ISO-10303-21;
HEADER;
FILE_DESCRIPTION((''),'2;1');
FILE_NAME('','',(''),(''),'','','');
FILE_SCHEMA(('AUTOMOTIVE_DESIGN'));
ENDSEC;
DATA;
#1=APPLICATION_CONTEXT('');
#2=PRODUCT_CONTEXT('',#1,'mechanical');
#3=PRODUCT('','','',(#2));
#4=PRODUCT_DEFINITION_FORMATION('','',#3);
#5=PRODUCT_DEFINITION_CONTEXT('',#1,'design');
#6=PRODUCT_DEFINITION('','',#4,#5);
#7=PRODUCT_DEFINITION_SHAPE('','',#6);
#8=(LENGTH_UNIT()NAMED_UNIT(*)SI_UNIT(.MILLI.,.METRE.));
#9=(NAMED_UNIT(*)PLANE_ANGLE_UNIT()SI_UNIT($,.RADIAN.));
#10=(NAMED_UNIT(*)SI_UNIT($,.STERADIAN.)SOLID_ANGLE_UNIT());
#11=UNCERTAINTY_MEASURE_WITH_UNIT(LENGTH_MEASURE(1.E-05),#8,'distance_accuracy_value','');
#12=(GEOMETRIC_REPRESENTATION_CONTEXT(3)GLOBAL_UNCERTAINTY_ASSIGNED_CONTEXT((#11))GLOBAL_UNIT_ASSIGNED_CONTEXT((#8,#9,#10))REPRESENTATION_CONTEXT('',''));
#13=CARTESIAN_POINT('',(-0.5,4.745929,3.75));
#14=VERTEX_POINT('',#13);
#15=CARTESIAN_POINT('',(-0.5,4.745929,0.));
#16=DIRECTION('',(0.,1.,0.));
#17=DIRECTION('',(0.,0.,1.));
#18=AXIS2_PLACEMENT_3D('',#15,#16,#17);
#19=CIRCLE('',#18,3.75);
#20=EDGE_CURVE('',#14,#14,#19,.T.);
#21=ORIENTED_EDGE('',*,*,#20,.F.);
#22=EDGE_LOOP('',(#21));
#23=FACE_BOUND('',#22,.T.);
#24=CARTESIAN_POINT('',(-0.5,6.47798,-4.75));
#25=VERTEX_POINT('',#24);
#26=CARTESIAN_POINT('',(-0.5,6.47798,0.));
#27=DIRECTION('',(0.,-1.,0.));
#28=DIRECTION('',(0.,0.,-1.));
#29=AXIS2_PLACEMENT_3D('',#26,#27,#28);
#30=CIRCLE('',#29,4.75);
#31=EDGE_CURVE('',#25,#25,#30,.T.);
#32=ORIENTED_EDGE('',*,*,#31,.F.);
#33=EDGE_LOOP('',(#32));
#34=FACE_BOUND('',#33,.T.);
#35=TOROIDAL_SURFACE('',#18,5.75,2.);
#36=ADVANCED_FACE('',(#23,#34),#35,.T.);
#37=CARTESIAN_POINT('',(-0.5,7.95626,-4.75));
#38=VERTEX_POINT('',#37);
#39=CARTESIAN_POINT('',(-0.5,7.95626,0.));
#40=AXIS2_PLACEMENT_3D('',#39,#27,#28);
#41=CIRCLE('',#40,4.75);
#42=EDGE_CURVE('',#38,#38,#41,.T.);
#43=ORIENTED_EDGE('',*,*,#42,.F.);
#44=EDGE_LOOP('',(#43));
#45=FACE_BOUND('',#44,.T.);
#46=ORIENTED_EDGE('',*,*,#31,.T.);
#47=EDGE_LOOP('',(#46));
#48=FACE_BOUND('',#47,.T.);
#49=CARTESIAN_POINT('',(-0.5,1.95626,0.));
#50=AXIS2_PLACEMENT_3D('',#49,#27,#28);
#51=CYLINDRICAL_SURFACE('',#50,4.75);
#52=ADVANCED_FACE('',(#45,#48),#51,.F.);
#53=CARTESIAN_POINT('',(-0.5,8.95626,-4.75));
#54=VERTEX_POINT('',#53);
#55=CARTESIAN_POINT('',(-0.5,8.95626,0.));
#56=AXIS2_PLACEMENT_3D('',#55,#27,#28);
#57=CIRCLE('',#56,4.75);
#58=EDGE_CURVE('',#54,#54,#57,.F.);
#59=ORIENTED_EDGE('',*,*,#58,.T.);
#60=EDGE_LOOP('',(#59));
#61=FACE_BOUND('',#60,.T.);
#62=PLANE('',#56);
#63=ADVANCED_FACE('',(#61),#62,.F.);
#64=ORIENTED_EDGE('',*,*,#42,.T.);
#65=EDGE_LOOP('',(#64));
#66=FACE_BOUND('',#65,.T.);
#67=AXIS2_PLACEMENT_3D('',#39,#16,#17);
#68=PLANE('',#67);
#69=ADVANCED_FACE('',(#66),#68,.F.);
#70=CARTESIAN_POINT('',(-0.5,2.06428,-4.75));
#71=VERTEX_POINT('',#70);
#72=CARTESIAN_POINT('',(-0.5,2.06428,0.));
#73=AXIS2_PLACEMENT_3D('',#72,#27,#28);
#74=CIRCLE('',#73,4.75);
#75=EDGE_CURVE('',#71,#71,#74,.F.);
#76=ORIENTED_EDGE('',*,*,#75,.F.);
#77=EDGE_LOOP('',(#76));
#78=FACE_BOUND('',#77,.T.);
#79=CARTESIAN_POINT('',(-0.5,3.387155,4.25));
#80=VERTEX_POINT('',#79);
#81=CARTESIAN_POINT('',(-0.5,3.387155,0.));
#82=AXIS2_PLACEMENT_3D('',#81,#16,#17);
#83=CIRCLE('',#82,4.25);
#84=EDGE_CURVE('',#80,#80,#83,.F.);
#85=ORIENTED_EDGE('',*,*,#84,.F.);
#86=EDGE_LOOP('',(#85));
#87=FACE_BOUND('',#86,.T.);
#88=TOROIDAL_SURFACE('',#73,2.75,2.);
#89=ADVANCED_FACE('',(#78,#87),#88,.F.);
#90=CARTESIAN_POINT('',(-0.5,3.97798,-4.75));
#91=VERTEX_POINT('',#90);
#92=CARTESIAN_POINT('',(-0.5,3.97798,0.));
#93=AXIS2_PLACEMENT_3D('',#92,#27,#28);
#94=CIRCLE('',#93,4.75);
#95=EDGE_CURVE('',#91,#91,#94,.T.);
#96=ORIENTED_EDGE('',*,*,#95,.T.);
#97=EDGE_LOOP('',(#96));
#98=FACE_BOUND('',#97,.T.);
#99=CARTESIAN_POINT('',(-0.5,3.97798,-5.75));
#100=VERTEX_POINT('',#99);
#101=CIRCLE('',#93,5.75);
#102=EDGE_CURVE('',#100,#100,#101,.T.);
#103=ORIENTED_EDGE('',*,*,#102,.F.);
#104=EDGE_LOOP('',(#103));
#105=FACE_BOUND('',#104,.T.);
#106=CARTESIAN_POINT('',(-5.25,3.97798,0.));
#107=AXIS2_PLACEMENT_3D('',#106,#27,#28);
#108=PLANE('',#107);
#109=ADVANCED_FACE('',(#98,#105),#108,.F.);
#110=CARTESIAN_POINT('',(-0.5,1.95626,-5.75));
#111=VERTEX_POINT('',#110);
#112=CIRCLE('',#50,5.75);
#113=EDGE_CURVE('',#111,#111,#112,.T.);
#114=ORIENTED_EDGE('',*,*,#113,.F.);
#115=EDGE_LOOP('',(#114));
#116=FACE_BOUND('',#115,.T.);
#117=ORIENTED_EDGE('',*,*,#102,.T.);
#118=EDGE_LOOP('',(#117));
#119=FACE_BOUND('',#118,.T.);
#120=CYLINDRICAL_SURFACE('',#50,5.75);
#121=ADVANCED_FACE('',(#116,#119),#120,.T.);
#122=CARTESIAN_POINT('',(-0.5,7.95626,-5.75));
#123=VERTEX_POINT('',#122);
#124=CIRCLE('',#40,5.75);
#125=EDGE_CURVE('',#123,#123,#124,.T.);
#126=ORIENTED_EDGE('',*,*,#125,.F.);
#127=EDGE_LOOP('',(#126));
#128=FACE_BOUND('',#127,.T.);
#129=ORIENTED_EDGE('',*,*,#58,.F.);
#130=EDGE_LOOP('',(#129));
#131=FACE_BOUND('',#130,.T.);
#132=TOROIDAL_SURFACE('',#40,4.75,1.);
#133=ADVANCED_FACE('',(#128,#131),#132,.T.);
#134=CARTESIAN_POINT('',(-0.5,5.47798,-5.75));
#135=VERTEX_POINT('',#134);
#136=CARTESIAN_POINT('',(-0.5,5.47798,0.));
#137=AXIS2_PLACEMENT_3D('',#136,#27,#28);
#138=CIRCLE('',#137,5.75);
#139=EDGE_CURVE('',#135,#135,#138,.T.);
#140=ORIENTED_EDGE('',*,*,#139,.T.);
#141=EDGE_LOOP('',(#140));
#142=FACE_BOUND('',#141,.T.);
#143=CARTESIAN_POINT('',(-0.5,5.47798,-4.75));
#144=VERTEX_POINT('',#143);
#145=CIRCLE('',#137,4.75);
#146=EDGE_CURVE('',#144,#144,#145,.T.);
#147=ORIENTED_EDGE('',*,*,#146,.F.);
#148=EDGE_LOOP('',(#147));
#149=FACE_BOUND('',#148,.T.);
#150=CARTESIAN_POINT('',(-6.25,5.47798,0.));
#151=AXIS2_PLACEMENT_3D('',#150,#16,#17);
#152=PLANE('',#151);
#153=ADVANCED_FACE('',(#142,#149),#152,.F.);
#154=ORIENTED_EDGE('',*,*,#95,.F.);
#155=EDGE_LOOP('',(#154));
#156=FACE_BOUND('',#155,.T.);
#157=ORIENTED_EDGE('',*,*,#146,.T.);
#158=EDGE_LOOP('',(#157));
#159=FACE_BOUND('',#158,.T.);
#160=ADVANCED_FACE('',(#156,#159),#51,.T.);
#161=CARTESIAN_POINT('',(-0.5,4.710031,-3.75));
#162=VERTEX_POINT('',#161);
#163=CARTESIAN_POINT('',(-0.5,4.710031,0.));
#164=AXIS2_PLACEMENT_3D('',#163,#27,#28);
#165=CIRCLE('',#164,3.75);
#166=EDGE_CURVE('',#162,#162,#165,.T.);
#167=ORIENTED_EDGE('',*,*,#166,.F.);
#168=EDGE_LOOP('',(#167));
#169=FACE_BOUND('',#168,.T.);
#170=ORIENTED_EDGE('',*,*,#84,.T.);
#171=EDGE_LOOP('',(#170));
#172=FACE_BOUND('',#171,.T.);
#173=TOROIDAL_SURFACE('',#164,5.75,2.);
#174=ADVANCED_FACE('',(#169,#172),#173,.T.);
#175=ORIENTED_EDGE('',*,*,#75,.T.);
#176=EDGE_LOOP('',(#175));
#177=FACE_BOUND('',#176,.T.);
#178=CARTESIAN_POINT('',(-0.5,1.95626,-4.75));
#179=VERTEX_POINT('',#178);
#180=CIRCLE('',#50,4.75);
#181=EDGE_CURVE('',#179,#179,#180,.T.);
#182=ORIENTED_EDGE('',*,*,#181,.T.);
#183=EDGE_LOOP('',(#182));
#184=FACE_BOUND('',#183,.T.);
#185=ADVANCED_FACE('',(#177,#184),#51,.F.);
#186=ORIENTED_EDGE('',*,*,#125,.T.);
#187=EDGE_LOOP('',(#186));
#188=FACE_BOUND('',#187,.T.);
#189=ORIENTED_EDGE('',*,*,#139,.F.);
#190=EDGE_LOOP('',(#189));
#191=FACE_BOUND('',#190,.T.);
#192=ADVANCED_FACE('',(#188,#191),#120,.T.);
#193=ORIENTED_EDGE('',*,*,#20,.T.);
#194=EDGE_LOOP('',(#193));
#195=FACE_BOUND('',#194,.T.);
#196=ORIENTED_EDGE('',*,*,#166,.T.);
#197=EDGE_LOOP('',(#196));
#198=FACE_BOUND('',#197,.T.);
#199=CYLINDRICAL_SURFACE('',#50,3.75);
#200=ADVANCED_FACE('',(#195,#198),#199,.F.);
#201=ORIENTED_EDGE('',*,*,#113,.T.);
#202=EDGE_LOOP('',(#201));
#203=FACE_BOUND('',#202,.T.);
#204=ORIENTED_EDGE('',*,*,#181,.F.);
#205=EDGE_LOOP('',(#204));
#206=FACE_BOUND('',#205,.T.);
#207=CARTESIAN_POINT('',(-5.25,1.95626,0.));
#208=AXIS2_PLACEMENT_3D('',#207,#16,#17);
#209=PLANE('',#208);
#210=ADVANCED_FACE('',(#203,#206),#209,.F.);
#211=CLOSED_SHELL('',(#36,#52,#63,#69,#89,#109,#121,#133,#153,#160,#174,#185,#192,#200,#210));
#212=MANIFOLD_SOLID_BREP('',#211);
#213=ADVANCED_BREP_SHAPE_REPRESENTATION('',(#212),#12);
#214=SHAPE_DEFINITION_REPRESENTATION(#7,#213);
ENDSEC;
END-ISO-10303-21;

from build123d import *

# Parameters (mm, degrees)
FILLET1_R = 2
FILLET2_R = 2
FILLET3_R = 2
FILLET4_R = 1


with BuildPart() as part:
    # Sketch1 → Revolve1 (revolve)
    with BuildSketch(Plane.XY, mode=Mode.PRIVATE) as revolve1_sk:
        Polygon((-0.5, 8.956259778), (-6.25, 8.956259778), (-6.25, 5.477980263), (-5.25, 5.477980263), (-5.25, 3.977980263), (-6.25, 3.977980263), (-6.25, 1.956259778), (-5.25, 1.956259778), (-5.25, 2.977980263), (-4.25, 2.977980263), (-4.25, 6.477980263), (-5.25, 6.477980263), (-5.25, 7.956259778), (-0.5, 7.956259778), align=None)
    revolve(revolve1_sk.sketch.rotate(Axis((-0.5, 1.956259778, 0), (0, 1, 0)), 270), axis=Axis((-0.5, 1.956259778, 0), (0, 1, 0)))

    # Fillet1
    # the kernel refuses this fillet: 2 mm, written as the material it takes off along each edge
    with BuildSketch(Plane(origin=(-0.5, 2.977980263, 0), x_dir=(0, 0, -1), z_dir=(1, 0, 0))) as fillet1_piece_1:
        with BuildLine():
            CenterArc((5.75, 1.732050808), FILLET1_R, 180, 60)
            Line((3.75, 1.732050808), (3.71, 1.732050808))
            Line((3.71, 1.732050808), (3.71, 0))
            Line((3.71, 0), (3.75, -0.04))
            ThreePointArc((3.75, -0.04), (4.25, -0.04), (4.73, -0.034641016))
            Line((4.73, -0.034641016), (4.75, 0))
        make_face()
    revolve(axis=Axis((-0.5, 2.977980263, 0), (0, 1, 0)), mode=Mode.SUBTRACT)

    # Fillet2
    fillet2_edges = [part.edges().sort_by_distance(p)[0] for p in [
        (-0.5, 2.977980263, 4.75),
    ]]
    fillet(fillet2_edges, radius=FILLET2_R)

    # Fillet3
    # the kernel refuses this fillet: 2 mm, written as the material it takes off along each edge
    with BuildSketch(Plane(origin=(-0.5, 6.477980263, 0), x_dir=(0, 0, -1), z_dir=(1, 0, 0))) as fillet3_piece_1:
        with BuildLine():
            CenterArc((5.75, -1.732050808), FILLET3_R, 120, 60)
            Line((4.75, 0), (4.73, 0.034641016))
            ThreePointArc((4.73, 0.034641016), (4.25, 0.04), (3.75, 0.04))
            Line((3.75, 0.04), (3.71, 0))
            Line((3.71, 0), (3.71, -1.732050808))
            Line((3.71, -1.732050808), (3.75, -1.732050808))
        make_face()
    revolve(axis=Axis((-0.5, 6.477980263, 0), (0, 1, 0)), mode=Mode.SUBTRACT)

    # Fillet4
    fillet4_edges = [part.edges().sort_by_distance(p)[0] for p in [
        (-0.5, 8.956259778, 5.75),
    ]]
    fillet(fillet4_edges, radius=FILLET4_R)


solid = part.part
